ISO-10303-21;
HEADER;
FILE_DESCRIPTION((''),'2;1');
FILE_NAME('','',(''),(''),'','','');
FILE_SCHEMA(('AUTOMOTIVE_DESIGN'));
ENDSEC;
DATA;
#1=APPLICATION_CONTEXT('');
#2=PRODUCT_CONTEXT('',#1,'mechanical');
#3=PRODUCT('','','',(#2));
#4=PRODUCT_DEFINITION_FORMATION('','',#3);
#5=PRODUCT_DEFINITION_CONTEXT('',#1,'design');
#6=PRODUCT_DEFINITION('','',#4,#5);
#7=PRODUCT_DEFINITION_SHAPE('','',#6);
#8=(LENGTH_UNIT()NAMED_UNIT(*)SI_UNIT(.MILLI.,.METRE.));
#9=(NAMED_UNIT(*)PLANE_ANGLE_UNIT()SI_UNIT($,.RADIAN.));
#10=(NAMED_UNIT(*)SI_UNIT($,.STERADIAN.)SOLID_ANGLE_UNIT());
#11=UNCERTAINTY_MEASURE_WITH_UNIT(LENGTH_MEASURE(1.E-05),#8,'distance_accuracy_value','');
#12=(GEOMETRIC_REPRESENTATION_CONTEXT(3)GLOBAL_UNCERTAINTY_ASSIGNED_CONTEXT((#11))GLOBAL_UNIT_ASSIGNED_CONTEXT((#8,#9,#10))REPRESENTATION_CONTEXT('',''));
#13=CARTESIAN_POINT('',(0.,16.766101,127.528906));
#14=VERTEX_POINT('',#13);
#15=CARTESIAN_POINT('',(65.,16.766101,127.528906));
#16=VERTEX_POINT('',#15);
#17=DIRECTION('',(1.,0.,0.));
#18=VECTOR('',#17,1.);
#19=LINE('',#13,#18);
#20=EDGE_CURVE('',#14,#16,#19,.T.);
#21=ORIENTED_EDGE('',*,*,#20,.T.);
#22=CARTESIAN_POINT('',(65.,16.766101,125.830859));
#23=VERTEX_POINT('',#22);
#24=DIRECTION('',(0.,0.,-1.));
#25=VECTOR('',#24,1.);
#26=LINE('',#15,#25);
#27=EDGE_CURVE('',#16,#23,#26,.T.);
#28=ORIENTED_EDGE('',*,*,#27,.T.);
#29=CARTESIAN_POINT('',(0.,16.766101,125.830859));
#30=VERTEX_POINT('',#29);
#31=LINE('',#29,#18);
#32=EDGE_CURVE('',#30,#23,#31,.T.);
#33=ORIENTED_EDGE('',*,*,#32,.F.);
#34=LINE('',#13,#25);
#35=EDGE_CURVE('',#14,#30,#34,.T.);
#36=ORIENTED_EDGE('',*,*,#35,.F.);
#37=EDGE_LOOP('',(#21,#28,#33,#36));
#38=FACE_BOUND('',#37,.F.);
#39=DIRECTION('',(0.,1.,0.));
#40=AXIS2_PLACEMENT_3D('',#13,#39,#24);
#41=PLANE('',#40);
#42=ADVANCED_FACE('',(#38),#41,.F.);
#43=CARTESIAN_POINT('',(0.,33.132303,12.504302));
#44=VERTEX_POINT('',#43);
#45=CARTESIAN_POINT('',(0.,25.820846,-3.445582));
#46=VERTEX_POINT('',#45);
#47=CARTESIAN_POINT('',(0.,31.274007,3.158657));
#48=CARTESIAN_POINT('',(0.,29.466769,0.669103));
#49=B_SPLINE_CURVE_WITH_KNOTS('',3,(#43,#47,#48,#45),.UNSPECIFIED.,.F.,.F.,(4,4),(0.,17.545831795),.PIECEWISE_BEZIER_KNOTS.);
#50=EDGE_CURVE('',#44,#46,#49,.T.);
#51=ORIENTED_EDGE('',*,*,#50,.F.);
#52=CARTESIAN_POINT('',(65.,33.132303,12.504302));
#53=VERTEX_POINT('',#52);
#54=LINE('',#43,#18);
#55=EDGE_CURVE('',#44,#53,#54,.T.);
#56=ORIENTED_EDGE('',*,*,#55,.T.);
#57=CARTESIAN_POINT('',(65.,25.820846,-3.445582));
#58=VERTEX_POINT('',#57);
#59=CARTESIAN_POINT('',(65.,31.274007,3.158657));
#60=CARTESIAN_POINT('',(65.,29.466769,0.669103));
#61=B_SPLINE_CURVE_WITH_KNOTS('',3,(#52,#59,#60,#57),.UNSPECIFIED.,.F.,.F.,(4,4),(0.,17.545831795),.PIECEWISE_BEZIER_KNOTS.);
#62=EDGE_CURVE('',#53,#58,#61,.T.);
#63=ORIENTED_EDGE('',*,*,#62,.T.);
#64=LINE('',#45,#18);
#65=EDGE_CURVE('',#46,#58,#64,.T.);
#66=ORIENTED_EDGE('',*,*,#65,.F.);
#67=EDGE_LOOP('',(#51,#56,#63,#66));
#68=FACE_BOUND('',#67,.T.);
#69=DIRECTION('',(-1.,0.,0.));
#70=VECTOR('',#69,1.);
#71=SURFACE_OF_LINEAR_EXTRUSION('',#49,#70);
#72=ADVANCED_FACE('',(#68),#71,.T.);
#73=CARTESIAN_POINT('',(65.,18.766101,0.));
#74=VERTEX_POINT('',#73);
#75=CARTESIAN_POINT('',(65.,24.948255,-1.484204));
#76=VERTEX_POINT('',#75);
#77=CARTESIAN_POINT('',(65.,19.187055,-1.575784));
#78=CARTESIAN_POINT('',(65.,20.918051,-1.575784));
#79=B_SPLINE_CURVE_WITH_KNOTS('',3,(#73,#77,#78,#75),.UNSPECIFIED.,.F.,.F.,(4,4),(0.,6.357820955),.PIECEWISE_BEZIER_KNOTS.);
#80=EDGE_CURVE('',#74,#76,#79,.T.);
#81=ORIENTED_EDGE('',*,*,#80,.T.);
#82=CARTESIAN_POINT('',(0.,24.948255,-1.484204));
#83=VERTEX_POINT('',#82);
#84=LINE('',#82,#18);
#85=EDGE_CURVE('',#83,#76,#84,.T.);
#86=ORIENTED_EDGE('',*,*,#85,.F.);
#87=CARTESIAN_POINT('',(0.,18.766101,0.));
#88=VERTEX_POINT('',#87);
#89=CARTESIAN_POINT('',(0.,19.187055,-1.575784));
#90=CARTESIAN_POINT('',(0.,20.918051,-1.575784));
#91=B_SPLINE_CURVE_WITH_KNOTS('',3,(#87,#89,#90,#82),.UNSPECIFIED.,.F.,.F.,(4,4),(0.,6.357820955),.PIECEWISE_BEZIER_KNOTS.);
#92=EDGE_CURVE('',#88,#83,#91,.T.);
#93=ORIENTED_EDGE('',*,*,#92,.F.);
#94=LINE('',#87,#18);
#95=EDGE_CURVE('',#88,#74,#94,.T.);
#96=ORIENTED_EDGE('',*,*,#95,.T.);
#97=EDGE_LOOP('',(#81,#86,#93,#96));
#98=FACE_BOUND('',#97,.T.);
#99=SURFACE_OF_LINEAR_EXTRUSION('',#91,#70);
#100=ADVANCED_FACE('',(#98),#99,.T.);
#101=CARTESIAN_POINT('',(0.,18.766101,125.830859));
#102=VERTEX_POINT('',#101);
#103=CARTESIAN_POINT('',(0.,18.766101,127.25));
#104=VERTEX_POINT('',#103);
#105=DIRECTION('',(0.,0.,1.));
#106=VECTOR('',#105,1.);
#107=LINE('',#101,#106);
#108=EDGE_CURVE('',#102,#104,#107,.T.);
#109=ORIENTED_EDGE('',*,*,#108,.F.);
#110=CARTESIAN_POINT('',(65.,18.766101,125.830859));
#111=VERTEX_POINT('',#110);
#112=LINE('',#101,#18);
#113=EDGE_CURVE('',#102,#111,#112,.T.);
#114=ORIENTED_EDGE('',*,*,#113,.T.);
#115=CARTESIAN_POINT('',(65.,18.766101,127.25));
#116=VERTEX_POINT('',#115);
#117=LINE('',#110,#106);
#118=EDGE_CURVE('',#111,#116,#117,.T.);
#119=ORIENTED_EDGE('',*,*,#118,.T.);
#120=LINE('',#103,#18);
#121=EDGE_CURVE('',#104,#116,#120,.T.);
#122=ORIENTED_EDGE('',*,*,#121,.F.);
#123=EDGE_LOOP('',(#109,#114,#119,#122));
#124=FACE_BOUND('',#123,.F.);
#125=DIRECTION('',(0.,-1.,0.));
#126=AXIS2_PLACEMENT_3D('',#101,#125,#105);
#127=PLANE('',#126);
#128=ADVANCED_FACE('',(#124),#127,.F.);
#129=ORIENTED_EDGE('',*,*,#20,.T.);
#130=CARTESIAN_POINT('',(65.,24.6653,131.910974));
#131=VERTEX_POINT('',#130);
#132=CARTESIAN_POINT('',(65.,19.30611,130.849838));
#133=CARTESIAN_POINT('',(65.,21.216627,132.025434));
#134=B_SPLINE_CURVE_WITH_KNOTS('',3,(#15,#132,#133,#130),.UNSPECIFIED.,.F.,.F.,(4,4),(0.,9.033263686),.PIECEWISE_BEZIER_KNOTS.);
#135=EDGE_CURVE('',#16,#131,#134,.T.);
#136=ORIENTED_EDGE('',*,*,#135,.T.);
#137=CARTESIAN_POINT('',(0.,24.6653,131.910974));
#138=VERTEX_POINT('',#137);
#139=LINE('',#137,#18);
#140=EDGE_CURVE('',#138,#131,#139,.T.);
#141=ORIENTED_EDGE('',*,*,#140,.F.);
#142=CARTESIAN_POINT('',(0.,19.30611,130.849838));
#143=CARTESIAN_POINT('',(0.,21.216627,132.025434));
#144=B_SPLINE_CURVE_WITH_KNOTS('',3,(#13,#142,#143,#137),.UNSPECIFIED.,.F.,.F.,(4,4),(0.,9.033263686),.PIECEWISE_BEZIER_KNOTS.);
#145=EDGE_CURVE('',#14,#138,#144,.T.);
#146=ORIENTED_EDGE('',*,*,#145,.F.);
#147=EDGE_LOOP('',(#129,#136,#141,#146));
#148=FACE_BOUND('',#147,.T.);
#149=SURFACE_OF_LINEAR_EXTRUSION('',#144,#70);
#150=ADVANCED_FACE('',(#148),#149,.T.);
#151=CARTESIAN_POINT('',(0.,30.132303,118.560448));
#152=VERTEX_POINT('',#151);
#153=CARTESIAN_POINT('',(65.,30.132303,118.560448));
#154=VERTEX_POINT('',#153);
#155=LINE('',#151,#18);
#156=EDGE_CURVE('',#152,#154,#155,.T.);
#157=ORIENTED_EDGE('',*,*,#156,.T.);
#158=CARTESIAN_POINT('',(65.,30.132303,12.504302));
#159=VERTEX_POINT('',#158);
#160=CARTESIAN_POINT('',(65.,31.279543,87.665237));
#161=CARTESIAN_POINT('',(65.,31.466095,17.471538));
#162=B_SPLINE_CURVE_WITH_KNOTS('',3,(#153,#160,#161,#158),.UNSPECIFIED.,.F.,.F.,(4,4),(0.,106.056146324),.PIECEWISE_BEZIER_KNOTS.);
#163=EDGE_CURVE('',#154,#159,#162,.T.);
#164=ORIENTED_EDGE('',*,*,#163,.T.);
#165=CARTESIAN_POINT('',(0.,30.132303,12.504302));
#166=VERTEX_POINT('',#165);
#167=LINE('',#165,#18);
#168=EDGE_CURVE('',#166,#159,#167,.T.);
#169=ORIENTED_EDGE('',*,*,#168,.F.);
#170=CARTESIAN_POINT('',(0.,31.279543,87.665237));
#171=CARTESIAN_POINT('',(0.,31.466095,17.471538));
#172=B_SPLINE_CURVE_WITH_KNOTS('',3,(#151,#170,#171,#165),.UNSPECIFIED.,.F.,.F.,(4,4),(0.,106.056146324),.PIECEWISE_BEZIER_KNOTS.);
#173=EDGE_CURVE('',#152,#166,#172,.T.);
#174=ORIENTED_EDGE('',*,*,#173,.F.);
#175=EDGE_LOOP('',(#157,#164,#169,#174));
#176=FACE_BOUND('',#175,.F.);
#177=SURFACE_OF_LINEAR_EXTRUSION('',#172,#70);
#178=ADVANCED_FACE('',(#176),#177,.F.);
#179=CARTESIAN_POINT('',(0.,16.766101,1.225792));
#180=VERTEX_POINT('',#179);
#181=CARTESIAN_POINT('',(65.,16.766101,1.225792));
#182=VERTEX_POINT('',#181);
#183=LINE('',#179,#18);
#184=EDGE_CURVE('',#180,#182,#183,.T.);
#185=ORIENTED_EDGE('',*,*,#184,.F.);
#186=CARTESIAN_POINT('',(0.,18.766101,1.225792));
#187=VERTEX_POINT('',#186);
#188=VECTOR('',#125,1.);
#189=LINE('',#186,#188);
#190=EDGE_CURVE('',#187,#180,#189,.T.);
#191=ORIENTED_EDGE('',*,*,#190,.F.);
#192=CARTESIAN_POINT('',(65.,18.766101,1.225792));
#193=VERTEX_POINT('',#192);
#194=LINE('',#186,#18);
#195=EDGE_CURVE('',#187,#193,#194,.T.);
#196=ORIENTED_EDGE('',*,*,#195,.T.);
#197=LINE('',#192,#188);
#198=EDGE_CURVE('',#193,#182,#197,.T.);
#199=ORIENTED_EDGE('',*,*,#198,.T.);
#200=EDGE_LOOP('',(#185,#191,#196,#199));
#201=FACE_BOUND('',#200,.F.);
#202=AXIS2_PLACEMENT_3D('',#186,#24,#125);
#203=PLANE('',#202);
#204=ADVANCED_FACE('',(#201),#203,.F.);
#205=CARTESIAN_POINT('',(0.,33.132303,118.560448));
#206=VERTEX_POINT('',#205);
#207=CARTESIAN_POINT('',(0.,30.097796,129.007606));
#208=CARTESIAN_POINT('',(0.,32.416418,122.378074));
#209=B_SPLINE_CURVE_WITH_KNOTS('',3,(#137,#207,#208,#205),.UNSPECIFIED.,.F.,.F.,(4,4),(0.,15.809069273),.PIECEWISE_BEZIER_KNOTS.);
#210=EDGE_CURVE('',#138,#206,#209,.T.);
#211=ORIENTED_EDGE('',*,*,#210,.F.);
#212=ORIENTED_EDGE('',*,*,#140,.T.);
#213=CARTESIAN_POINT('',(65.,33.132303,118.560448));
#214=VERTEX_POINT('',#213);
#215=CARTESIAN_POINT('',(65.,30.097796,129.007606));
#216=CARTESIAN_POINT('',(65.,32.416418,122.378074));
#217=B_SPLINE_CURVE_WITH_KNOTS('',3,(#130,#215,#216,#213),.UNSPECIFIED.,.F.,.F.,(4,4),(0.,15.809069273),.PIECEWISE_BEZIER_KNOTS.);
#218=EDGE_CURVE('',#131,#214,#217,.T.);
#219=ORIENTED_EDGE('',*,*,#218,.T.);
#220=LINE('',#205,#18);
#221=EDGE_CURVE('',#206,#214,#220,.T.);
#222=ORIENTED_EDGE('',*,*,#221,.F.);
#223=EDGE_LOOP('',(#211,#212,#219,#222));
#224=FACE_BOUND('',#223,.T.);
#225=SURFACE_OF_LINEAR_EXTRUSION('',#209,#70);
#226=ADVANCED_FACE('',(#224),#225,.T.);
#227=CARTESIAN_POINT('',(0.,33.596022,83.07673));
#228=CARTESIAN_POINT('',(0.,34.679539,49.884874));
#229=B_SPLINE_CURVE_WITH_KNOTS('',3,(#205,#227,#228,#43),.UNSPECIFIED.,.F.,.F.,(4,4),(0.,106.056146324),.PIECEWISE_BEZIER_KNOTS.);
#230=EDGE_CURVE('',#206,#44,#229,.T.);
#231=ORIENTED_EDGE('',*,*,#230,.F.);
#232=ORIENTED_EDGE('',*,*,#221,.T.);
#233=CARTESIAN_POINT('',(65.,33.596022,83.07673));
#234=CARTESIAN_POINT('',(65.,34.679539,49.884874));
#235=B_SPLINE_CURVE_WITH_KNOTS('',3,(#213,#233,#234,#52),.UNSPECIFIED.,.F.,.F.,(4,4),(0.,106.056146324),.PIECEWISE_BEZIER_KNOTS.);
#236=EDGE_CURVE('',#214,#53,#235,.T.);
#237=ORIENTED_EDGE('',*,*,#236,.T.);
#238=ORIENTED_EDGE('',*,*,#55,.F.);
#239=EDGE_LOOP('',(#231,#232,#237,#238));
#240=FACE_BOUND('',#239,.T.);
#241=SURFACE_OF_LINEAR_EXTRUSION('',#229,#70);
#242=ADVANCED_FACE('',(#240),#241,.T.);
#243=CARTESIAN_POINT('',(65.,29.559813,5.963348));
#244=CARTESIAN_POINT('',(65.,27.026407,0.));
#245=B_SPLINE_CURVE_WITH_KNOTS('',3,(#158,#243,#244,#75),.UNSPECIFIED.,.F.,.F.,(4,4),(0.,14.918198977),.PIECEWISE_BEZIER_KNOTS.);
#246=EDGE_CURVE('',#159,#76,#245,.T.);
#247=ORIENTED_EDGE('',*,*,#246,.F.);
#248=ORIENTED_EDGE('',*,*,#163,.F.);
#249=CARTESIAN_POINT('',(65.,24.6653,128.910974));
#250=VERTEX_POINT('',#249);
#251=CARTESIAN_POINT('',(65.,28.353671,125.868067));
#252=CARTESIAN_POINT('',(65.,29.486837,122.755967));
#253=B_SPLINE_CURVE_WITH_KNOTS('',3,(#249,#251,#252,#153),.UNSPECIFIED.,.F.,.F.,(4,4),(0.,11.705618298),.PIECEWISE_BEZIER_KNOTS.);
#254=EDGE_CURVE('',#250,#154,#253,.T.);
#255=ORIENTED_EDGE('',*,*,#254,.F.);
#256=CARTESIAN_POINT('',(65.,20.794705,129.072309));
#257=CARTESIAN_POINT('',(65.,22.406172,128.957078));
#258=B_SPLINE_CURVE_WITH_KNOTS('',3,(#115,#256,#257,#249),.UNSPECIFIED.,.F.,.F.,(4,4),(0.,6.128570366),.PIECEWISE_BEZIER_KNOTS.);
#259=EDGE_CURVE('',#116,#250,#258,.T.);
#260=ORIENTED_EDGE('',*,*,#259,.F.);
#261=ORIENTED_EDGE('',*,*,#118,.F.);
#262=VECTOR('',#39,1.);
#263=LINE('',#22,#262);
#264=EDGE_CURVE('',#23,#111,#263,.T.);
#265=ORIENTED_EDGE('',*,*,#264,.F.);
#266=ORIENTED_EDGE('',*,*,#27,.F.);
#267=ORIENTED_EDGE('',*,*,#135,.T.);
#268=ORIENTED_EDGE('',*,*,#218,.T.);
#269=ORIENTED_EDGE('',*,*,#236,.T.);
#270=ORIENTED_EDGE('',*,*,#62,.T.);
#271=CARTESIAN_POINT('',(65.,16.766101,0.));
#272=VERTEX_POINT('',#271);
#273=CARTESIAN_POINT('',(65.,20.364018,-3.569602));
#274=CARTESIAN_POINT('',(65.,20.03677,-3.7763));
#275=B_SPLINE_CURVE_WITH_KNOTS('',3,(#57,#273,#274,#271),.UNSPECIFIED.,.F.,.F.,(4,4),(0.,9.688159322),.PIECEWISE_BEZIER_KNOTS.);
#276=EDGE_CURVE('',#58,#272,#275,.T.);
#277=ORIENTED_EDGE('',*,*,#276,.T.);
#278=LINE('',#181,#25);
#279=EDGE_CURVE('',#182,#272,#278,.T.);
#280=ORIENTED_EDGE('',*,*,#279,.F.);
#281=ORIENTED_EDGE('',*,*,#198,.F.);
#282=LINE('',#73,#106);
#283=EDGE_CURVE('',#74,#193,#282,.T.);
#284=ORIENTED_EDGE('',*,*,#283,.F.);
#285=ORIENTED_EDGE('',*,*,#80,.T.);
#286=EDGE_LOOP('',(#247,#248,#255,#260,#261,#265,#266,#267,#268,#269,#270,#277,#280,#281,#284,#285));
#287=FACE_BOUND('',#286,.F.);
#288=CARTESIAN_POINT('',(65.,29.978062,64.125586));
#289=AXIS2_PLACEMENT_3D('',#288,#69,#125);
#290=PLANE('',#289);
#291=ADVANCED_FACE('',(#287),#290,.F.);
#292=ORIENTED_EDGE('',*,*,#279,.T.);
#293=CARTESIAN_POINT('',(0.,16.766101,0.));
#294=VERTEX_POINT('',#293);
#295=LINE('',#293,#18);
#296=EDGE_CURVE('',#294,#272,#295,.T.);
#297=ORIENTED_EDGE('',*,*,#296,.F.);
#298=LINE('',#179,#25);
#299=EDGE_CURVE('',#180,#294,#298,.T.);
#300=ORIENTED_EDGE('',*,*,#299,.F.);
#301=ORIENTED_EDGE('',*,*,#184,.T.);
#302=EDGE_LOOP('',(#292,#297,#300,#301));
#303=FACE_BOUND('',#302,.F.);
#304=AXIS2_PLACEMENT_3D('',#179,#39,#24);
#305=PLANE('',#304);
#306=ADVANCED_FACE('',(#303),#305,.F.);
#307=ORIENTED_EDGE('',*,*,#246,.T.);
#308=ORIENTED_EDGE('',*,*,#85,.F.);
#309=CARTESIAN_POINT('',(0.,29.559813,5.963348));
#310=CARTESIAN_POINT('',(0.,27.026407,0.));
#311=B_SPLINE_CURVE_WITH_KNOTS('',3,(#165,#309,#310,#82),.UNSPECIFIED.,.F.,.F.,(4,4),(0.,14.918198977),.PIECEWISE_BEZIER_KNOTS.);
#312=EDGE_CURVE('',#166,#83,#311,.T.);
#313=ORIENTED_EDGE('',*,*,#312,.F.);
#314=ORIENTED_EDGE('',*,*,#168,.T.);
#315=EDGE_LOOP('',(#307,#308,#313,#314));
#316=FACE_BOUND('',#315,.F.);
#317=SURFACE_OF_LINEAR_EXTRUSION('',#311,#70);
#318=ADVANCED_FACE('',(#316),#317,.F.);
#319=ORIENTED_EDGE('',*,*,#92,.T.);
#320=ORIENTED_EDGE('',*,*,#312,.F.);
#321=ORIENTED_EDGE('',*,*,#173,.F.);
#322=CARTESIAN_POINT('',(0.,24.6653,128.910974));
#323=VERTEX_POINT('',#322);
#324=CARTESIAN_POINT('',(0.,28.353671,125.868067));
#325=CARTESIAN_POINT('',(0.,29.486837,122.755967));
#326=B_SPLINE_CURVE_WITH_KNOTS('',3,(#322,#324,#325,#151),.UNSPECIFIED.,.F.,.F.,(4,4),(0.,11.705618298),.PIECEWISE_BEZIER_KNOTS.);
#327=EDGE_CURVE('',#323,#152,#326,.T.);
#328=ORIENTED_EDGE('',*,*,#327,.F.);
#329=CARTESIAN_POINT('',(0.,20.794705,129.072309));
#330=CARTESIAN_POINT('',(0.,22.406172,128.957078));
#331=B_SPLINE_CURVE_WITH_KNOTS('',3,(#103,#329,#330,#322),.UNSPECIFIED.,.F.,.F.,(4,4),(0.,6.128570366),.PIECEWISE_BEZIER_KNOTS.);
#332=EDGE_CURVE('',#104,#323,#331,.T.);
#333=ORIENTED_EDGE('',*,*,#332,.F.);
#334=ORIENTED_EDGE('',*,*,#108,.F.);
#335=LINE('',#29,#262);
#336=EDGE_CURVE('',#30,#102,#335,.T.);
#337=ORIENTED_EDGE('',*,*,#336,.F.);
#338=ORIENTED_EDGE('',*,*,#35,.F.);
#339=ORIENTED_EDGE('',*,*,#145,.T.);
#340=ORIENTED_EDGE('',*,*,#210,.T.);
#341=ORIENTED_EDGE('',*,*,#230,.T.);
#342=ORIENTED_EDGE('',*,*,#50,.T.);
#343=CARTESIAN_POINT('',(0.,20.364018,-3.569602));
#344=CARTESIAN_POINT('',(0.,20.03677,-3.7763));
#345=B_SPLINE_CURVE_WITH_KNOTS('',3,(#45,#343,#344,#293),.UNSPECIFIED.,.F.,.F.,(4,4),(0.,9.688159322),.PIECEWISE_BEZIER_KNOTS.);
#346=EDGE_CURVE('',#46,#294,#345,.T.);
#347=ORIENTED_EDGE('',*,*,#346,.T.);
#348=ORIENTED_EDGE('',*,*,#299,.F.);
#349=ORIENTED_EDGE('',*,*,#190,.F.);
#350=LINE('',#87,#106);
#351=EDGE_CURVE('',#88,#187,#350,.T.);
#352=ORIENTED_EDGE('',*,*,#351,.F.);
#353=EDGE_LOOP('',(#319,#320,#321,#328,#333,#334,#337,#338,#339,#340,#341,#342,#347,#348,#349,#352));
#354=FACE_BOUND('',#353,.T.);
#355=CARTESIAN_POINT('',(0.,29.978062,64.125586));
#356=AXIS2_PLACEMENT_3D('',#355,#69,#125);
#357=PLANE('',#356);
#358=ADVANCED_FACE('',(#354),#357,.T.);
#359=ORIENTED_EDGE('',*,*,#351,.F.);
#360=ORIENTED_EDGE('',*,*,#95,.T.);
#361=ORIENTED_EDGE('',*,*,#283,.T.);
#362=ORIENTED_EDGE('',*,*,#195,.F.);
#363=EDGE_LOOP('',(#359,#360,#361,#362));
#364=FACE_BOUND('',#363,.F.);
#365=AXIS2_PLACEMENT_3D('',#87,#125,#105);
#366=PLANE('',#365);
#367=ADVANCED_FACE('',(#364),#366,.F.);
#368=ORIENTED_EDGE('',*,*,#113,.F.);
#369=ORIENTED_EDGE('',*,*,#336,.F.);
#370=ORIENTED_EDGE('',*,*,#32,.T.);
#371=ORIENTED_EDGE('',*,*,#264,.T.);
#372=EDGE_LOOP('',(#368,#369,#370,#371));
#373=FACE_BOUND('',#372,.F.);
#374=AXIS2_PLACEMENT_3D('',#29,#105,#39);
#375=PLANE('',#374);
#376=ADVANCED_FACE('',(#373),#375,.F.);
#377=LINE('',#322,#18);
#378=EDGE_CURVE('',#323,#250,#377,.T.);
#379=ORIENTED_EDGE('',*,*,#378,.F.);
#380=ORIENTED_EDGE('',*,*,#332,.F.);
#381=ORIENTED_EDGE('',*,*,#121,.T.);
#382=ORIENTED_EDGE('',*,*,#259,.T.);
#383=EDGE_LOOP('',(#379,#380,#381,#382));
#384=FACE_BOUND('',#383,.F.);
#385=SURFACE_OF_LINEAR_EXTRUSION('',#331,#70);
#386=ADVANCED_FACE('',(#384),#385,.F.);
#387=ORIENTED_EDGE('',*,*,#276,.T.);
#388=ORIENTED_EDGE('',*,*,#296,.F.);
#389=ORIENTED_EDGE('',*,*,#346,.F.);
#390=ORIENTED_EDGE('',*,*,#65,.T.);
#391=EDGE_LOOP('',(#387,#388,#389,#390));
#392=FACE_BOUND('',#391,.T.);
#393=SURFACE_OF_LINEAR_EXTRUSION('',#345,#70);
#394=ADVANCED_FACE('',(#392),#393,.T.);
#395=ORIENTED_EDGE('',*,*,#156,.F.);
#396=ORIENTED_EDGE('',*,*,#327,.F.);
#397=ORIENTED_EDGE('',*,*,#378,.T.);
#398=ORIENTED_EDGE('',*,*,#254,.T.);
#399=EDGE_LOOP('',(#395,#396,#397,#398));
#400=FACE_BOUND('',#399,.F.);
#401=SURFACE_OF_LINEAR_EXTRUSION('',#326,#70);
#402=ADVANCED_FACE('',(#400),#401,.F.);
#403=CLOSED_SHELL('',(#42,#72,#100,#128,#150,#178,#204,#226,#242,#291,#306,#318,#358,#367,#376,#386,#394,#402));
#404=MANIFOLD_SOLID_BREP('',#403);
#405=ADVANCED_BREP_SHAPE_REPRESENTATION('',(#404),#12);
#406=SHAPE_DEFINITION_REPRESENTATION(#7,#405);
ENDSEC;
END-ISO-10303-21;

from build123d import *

# Parameters (mm, degrees)
F1_DEPTH = 65


# Not quite as in the source:
# - a feature of the source that left no trace in its solid (it failed there, or was rolled back) is left out


with BuildPart() as f1:
    # F0 (on Right) → F1 (new body)
    with BuildSketch(Plane.YZ):
        with BuildLine():
            add(Edge.make_bspline(
                [(18.7661014497, 0), (19.1870545514, -1.5757839415), (20.9180506756, -1.5757839415), (24.9482551811, -1.4842043442)],
                knots=[0, 0, 0, 0, 6.3578209548, 6.3578209548, 6.3578209548, 6.3578209548], degree=3))
            Line((18.7661014497, 0), (18.7661014497, 1.2257922208))
            Line((18.7661014497, 1.2257922208), (16.7661014497, 1.2257922208))
            Line((16.7661014497, 1.2257922208), (16.7661014497, 0))
            add(Edge.make_bspline(
                [(25.8208457381, -3.4455822315), (20.3640181571, -3.5696015693), (20.0367699781, -3.7762995344), (16.7661014497, 0)],
                knots=[0, 0, 0, 0, 9.6881593216, 9.6881593216, 9.6881593216, 9.6881593216], degree=3))
            add(Edge.make_bspline(
                [(33.1323030144, 12.5043019652), (31.2740066807, 3.1586566474), (29.4667687267, 0.669103465), (25.8208457381, -3.4455822315)],
                knots=[0, 0, 0, 0, 17.5458317954, 17.5458317954, 17.5458317954, 17.5458317954], degree=3))
            add(Edge.make_bspline(
                [(33.1323030144, 118.5604482889), (33.596022293, 83.0767303705), (34.6795393378, 49.8848743737), (33.1323030144, 12.5043019652)],
                knots=[0, 0, 0, 0, 106.0561463237, 106.0561463237, 106.0561463237, 106.0561463237], degree=3))
            add(Edge.make_bspline(
                [(24.665299803, 131.9109736681), (30.0977956504, 129.0076056719), (32.4164180309, 122.3780736327), (33.1323030144, 118.5604482889)],
                knots=[0, 0, 0, 0, 15.8090692731, 15.8090692731, 15.8090692731, 15.8090692731], degree=3))
            add(Edge.make_bspline(
                [(16.7661014497, 127.5289058685), (19.3061102182, 130.8498382568), (21.2166272104, 132.0254335403), (24.665299803, 131.9109736681)],
                knots=[0, 0, 0, 0, 9.0332636862, 9.0332636862, 9.0332636862, 9.0332636862], degree=3))
            Line((16.7661014497, 127.5289058685), (16.7661014497, 125.8308589458))
            Line((16.7661014497, 125.8308589458), (18.7661014497, 125.8308589458))
            Line((18.7661014497, 125.8308589458), (18.7661014497, 127.25))
            add(Edge.make_bspline(
                [(18.7661014497, 127.25), (20.7947045565, 129.0723085403), (22.4061720073, 128.9570778608), (24.665299803, 128.9109736681)],
                knots=[0, 0, 0, 0, 6.1285703665, 6.1285703665, 6.1285703665, 6.1285703665], degree=3))
            add(Edge.make_bspline(
                [(24.665299803, 128.9109736681), (28.353670612, 125.8680671453), (29.4868368655, 122.7559670806), (30.1323030144, 118.5604482889)],
                knots=[0, 0, 0, 0, 11.705618298, 11.705618298, 11.705618298, 11.705618298], degree=3))
            add(Edge.make_bspline(
                [(30.1323030144, 118.5604482889), (31.2795434147, 87.6652374864), (31.466094777, 17.4715379253), (30.1323030144, 12.5043019652)],
                knots=[0, 0, 0, 0, 106.0561463237, 106.0561463237, 106.0561463237, 106.0561463237], degree=3))
            add(Edge.make_bspline(
                [(30.1323030144, 12.5043019652), (29.5598134398, 5.9633483179), (27.0264066677, 0), (24.9482551811, -1.4842043442)],
                knots=[0, 0, 0, 0, 14.9181989766, 14.9181989766, 14.9181989766, 14.9181989766], degree=3))
        make_face()
    extrude(amount=F1_DEPTH)


solid = f1.part
